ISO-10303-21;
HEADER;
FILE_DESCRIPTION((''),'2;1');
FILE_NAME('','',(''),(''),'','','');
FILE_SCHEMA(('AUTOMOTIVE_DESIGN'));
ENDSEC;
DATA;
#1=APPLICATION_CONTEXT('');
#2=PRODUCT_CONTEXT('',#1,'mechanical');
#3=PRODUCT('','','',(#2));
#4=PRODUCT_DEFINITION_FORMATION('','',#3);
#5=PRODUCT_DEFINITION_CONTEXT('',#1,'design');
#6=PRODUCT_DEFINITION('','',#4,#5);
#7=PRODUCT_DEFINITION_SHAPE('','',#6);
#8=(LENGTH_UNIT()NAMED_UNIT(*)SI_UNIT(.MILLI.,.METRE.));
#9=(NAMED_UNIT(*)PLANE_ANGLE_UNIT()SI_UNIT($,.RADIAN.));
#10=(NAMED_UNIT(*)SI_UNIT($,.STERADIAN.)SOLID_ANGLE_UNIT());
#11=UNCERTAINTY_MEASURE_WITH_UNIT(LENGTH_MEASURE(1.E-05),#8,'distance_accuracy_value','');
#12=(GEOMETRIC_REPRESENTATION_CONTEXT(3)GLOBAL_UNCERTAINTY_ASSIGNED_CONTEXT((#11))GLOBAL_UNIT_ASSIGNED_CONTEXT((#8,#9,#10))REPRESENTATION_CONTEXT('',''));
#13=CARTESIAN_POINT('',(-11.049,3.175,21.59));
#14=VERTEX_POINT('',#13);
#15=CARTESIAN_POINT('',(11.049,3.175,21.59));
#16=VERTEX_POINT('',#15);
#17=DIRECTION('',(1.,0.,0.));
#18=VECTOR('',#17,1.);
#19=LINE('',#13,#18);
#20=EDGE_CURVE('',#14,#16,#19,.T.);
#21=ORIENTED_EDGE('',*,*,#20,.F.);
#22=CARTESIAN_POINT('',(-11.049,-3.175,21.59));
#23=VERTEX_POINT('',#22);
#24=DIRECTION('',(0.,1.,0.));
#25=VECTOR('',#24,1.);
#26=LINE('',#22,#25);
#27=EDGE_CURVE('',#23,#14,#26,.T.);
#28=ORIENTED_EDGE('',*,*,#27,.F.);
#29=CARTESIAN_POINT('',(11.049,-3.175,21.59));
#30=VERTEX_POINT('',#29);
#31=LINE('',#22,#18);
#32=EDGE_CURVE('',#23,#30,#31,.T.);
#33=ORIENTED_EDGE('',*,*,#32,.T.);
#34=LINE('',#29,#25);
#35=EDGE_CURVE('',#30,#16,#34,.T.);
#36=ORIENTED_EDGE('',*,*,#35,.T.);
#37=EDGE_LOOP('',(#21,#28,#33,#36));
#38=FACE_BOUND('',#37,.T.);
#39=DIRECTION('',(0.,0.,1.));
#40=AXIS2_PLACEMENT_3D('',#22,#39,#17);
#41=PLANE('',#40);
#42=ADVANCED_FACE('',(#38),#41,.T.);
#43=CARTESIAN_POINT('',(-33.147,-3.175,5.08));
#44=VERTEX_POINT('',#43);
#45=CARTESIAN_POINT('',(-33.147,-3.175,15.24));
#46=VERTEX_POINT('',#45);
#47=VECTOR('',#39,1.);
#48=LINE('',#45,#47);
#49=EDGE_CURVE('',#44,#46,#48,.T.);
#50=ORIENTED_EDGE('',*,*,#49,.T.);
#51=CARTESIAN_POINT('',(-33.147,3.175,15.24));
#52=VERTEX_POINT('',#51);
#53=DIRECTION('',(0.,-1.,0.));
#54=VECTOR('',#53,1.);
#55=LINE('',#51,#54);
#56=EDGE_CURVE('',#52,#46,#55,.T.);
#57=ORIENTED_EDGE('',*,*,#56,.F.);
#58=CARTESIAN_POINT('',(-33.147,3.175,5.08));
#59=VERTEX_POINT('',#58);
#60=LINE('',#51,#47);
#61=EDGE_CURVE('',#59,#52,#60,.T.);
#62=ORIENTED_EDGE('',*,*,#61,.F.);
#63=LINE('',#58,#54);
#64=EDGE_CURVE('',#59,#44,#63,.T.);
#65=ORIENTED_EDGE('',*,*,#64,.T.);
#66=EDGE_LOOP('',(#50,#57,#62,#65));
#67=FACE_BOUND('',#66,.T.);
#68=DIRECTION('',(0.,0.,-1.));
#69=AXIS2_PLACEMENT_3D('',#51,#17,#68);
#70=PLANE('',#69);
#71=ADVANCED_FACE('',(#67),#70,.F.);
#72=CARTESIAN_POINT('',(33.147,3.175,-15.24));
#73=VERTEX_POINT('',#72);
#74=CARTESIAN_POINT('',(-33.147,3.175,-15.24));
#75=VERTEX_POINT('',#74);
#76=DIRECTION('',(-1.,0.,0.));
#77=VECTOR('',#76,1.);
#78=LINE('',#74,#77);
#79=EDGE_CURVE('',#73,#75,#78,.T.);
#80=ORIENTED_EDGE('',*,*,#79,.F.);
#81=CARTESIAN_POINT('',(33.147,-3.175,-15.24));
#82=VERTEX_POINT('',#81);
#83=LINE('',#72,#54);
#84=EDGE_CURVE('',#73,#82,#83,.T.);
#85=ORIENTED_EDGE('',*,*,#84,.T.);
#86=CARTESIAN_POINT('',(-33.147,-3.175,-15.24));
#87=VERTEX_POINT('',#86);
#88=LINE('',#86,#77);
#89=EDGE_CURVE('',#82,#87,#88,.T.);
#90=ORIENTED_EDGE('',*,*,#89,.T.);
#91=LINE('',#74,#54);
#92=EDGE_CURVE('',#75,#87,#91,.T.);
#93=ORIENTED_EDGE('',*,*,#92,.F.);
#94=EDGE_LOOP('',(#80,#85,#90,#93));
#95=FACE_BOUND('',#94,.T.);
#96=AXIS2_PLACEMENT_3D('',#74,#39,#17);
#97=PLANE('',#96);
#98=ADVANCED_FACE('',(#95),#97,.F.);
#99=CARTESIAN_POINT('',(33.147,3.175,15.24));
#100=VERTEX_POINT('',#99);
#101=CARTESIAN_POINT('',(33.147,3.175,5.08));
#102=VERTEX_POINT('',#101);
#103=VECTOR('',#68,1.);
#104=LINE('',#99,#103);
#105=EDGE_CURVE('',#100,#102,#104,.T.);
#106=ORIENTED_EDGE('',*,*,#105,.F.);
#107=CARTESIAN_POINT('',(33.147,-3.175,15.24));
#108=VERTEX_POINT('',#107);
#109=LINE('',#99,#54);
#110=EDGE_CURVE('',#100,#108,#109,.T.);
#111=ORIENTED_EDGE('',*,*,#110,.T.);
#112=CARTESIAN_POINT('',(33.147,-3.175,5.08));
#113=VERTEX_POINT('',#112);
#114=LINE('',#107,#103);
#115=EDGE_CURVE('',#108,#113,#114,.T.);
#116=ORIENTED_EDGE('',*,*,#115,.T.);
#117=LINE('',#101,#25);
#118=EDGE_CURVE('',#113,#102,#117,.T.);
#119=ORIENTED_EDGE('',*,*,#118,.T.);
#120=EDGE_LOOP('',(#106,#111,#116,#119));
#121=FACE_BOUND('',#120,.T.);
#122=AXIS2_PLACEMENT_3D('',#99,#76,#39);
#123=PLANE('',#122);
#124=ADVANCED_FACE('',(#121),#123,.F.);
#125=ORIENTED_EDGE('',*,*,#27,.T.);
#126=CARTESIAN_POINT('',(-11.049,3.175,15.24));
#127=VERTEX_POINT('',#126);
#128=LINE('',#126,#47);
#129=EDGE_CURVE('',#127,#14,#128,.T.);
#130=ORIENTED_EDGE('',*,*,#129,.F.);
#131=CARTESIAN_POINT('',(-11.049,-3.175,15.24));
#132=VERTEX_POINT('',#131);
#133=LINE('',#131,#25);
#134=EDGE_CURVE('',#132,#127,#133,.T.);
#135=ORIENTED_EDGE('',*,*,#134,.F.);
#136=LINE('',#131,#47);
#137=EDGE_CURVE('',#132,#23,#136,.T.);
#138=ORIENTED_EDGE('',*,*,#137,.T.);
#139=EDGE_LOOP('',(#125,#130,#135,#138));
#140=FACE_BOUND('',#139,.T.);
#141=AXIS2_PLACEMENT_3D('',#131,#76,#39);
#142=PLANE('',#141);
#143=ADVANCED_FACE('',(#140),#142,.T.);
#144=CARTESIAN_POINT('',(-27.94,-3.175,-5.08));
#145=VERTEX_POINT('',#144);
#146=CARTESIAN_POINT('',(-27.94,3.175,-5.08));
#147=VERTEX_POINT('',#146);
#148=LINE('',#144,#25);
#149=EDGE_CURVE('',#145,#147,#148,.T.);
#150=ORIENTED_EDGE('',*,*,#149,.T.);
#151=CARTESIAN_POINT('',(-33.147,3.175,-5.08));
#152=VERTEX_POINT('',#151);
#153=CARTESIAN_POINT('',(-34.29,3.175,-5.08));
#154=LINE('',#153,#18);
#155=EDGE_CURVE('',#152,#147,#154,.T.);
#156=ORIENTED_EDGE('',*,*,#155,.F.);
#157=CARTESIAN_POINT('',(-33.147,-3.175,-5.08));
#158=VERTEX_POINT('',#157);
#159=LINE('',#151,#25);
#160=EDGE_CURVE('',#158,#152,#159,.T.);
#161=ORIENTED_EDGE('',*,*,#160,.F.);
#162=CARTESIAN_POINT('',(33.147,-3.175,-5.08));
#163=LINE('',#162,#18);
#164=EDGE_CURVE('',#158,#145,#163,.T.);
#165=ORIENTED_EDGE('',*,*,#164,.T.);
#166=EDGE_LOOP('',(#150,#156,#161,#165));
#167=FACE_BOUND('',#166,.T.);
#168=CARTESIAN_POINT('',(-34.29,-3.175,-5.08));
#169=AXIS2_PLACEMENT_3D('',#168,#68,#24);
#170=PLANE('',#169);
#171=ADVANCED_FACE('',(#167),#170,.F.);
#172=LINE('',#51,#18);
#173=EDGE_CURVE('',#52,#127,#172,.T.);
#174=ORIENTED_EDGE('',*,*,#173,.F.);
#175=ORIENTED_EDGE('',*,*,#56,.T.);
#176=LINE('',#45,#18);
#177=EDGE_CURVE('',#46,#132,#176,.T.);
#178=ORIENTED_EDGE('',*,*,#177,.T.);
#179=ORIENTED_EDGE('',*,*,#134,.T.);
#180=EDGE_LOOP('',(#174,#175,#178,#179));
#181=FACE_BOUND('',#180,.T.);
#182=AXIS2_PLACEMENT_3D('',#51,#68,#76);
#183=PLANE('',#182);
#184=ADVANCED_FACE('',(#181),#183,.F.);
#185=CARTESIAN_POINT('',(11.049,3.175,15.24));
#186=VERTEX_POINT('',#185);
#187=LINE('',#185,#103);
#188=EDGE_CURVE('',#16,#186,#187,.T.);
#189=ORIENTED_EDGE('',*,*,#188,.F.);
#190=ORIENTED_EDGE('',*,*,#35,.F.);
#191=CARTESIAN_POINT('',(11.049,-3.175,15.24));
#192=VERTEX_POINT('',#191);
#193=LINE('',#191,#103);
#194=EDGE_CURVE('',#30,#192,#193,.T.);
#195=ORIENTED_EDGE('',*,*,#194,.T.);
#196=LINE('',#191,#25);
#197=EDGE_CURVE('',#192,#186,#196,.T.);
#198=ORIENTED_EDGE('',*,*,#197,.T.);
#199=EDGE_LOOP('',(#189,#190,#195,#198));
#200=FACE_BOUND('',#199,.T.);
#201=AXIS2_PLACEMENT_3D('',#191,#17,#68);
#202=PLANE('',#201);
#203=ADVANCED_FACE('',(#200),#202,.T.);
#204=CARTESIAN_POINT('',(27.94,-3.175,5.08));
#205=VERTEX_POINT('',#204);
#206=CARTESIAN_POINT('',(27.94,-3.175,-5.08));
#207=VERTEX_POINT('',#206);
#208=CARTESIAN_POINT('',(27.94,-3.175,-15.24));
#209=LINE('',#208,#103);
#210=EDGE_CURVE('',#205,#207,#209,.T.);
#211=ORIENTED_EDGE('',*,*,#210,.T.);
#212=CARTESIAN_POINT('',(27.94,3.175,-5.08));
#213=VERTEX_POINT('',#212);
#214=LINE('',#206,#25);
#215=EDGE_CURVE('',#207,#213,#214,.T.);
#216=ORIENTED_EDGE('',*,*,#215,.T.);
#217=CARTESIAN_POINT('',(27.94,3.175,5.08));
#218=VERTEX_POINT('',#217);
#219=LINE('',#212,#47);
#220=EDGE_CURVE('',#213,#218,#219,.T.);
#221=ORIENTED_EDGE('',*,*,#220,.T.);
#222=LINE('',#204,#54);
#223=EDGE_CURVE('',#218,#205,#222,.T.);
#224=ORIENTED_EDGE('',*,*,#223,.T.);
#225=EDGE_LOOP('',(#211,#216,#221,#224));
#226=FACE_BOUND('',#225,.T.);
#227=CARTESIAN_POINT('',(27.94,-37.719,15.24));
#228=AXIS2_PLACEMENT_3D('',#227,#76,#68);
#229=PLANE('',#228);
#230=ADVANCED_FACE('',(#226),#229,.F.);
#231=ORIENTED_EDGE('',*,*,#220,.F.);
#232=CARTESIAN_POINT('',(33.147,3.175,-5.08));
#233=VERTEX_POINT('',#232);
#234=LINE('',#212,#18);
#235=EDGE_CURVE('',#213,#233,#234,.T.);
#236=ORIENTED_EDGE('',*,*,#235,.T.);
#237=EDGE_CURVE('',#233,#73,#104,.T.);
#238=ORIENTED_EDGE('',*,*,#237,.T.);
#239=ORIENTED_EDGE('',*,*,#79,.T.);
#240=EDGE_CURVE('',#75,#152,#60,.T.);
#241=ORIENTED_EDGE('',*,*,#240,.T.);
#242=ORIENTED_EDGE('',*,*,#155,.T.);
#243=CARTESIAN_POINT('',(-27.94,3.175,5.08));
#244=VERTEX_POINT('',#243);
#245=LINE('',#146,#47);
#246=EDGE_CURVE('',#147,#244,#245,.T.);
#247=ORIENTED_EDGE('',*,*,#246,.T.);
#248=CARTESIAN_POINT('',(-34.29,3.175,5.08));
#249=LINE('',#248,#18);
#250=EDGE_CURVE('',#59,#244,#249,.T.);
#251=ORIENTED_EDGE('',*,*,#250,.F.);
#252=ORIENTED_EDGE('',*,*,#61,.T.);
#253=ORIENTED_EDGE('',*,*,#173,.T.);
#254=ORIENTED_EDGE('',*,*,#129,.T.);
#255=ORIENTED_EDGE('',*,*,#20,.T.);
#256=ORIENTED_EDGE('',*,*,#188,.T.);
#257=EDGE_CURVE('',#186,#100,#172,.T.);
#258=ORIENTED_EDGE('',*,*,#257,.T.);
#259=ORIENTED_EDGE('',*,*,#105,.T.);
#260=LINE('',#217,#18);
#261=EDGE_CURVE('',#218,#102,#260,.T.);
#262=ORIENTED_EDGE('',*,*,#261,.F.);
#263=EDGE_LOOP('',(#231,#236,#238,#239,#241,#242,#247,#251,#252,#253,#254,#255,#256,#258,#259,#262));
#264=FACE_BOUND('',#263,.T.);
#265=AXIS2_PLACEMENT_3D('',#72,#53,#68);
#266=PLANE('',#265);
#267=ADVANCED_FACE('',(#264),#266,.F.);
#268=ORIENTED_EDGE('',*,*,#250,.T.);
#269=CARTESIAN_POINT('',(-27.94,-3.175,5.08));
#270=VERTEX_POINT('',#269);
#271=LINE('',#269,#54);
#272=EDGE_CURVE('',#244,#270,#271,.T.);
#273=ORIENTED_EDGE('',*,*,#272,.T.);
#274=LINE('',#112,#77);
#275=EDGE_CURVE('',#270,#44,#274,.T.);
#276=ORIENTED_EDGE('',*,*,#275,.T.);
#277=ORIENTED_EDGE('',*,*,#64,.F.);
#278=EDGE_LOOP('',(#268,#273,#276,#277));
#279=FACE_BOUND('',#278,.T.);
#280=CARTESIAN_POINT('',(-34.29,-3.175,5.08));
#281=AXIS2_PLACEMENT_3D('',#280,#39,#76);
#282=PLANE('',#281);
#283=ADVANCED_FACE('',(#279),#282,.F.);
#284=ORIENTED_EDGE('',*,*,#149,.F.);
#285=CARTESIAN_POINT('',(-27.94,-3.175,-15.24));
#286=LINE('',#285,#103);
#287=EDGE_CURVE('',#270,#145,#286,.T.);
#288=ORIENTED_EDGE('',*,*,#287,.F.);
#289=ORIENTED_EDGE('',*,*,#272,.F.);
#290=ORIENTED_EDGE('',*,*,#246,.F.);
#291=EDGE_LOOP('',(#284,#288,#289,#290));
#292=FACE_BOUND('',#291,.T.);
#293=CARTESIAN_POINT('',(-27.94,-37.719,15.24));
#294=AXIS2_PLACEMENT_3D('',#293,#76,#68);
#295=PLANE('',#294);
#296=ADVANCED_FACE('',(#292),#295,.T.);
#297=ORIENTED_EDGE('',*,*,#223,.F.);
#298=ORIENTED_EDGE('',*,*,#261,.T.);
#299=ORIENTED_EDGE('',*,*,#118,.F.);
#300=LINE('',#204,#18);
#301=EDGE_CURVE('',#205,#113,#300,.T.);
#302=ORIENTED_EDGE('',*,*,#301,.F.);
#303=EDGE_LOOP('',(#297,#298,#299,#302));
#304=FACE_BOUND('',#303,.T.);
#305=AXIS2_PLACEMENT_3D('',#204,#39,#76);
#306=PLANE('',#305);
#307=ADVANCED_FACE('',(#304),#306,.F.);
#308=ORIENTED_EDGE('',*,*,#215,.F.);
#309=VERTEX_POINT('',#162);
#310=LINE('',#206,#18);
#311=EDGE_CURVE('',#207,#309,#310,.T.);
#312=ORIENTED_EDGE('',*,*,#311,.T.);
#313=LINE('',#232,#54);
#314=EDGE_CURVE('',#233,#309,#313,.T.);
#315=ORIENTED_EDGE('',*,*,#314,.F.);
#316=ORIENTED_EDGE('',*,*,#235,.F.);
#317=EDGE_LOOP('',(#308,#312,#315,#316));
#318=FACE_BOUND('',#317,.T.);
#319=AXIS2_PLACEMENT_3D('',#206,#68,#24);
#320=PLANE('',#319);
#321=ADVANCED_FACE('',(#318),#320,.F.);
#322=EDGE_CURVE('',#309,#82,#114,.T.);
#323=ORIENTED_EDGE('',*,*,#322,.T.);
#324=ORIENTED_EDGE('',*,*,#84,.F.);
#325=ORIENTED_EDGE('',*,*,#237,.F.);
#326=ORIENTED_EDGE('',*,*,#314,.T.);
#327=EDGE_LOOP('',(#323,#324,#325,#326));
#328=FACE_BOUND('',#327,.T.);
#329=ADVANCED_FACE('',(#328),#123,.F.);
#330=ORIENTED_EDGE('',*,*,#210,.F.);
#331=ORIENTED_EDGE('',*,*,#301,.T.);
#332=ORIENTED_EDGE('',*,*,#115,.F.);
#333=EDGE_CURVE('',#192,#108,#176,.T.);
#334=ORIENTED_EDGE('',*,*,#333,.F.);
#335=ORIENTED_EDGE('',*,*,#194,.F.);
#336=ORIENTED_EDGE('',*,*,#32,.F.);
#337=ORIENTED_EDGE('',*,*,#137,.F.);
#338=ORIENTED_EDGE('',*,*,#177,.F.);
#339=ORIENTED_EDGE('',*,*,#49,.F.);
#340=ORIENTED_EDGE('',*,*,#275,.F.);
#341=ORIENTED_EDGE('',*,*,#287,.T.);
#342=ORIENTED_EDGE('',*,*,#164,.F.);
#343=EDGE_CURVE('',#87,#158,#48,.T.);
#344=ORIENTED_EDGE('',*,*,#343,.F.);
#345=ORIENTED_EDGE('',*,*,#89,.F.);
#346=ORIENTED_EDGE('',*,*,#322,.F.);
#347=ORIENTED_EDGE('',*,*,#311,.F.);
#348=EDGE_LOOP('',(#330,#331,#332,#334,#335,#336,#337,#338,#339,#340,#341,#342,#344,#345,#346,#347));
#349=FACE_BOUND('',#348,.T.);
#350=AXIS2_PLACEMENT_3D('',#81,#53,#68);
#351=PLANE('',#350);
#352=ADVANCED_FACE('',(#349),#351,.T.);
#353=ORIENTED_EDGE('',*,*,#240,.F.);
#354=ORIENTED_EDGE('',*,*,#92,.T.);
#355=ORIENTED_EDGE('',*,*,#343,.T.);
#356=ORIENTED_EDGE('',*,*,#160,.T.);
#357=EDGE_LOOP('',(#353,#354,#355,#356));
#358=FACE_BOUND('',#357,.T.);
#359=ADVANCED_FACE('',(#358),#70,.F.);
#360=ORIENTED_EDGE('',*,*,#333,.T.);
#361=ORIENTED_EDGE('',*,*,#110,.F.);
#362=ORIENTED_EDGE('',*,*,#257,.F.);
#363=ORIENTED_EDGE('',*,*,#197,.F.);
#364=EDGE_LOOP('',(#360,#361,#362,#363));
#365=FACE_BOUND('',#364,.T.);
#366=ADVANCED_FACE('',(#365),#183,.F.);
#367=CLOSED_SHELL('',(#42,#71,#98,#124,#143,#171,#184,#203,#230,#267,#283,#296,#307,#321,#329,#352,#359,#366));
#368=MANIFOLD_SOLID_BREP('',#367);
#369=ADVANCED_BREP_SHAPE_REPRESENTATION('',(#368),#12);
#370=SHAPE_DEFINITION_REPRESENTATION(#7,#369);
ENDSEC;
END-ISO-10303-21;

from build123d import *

# Parameters (mm, degrees)
SKETCH1_W           = 66.294
SKETCH1_H           = 30.48
BOSS_EXTRUDE1_DEPTH = 3.175
SKETCH2_W           = 22.098
SKETCH2_H           = 6.35
BOSS_EXTRUDE2_DEPTH = 6.35
CAVITY1_START       = -5.08
CAVITY1_OUTLINE_W   = 5.207
CAVITY1_OUTLINE_H   = 6.35
CAVITY1_DEPTH       = 10.16


# Read off the part's stored shape, not the designer's step: Cavity1
with BuildPart() as part:
    # Sketch1 → Boss-Extrude1 (new, symmetric)
    with BuildSketch(Plane(origin=(0, 0, 0), x_dir=(1, 0, 0), z_dir=(0, 1, 0))):
        Rectangle(SKETCH1_W, SKETCH1_H)
    extrude(amount=BOSS_EXTRUDE1_DEPTH, both=True)

    # Sketch2 → Boss-Extrude2 (add)
    with BuildSketch(Plane(origin=(0, 3.175, 0), x_dir=(1, 0, 0), z_dir=(0, 1, 0))):
        with Locations((0, -18.415)):
            Rectangle(SKETCH2_W, SKETCH2_H)
    extrude(amount=-BOSS_EXTRUDE2_DEPTH)

    # Cavity1 outline → Cavity1 (cut)
    with BuildSketch(Plane.XY.offset(CAVITY1_START)):
        with Locations((30.5435, 0)):
            Rectangle(CAVITY1_OUTLINE_W, CAVITY1_OUTLINE_H)
        with Locations((-30.5435, 0)):
            Rectangle(CAVITY1_OUTLINE_W, CAVITY1_OUTLINE_H)
    extrude(amount=CAVITY1_DEPTH, mode=Mode.SUBTRACT)


solid = part.part
